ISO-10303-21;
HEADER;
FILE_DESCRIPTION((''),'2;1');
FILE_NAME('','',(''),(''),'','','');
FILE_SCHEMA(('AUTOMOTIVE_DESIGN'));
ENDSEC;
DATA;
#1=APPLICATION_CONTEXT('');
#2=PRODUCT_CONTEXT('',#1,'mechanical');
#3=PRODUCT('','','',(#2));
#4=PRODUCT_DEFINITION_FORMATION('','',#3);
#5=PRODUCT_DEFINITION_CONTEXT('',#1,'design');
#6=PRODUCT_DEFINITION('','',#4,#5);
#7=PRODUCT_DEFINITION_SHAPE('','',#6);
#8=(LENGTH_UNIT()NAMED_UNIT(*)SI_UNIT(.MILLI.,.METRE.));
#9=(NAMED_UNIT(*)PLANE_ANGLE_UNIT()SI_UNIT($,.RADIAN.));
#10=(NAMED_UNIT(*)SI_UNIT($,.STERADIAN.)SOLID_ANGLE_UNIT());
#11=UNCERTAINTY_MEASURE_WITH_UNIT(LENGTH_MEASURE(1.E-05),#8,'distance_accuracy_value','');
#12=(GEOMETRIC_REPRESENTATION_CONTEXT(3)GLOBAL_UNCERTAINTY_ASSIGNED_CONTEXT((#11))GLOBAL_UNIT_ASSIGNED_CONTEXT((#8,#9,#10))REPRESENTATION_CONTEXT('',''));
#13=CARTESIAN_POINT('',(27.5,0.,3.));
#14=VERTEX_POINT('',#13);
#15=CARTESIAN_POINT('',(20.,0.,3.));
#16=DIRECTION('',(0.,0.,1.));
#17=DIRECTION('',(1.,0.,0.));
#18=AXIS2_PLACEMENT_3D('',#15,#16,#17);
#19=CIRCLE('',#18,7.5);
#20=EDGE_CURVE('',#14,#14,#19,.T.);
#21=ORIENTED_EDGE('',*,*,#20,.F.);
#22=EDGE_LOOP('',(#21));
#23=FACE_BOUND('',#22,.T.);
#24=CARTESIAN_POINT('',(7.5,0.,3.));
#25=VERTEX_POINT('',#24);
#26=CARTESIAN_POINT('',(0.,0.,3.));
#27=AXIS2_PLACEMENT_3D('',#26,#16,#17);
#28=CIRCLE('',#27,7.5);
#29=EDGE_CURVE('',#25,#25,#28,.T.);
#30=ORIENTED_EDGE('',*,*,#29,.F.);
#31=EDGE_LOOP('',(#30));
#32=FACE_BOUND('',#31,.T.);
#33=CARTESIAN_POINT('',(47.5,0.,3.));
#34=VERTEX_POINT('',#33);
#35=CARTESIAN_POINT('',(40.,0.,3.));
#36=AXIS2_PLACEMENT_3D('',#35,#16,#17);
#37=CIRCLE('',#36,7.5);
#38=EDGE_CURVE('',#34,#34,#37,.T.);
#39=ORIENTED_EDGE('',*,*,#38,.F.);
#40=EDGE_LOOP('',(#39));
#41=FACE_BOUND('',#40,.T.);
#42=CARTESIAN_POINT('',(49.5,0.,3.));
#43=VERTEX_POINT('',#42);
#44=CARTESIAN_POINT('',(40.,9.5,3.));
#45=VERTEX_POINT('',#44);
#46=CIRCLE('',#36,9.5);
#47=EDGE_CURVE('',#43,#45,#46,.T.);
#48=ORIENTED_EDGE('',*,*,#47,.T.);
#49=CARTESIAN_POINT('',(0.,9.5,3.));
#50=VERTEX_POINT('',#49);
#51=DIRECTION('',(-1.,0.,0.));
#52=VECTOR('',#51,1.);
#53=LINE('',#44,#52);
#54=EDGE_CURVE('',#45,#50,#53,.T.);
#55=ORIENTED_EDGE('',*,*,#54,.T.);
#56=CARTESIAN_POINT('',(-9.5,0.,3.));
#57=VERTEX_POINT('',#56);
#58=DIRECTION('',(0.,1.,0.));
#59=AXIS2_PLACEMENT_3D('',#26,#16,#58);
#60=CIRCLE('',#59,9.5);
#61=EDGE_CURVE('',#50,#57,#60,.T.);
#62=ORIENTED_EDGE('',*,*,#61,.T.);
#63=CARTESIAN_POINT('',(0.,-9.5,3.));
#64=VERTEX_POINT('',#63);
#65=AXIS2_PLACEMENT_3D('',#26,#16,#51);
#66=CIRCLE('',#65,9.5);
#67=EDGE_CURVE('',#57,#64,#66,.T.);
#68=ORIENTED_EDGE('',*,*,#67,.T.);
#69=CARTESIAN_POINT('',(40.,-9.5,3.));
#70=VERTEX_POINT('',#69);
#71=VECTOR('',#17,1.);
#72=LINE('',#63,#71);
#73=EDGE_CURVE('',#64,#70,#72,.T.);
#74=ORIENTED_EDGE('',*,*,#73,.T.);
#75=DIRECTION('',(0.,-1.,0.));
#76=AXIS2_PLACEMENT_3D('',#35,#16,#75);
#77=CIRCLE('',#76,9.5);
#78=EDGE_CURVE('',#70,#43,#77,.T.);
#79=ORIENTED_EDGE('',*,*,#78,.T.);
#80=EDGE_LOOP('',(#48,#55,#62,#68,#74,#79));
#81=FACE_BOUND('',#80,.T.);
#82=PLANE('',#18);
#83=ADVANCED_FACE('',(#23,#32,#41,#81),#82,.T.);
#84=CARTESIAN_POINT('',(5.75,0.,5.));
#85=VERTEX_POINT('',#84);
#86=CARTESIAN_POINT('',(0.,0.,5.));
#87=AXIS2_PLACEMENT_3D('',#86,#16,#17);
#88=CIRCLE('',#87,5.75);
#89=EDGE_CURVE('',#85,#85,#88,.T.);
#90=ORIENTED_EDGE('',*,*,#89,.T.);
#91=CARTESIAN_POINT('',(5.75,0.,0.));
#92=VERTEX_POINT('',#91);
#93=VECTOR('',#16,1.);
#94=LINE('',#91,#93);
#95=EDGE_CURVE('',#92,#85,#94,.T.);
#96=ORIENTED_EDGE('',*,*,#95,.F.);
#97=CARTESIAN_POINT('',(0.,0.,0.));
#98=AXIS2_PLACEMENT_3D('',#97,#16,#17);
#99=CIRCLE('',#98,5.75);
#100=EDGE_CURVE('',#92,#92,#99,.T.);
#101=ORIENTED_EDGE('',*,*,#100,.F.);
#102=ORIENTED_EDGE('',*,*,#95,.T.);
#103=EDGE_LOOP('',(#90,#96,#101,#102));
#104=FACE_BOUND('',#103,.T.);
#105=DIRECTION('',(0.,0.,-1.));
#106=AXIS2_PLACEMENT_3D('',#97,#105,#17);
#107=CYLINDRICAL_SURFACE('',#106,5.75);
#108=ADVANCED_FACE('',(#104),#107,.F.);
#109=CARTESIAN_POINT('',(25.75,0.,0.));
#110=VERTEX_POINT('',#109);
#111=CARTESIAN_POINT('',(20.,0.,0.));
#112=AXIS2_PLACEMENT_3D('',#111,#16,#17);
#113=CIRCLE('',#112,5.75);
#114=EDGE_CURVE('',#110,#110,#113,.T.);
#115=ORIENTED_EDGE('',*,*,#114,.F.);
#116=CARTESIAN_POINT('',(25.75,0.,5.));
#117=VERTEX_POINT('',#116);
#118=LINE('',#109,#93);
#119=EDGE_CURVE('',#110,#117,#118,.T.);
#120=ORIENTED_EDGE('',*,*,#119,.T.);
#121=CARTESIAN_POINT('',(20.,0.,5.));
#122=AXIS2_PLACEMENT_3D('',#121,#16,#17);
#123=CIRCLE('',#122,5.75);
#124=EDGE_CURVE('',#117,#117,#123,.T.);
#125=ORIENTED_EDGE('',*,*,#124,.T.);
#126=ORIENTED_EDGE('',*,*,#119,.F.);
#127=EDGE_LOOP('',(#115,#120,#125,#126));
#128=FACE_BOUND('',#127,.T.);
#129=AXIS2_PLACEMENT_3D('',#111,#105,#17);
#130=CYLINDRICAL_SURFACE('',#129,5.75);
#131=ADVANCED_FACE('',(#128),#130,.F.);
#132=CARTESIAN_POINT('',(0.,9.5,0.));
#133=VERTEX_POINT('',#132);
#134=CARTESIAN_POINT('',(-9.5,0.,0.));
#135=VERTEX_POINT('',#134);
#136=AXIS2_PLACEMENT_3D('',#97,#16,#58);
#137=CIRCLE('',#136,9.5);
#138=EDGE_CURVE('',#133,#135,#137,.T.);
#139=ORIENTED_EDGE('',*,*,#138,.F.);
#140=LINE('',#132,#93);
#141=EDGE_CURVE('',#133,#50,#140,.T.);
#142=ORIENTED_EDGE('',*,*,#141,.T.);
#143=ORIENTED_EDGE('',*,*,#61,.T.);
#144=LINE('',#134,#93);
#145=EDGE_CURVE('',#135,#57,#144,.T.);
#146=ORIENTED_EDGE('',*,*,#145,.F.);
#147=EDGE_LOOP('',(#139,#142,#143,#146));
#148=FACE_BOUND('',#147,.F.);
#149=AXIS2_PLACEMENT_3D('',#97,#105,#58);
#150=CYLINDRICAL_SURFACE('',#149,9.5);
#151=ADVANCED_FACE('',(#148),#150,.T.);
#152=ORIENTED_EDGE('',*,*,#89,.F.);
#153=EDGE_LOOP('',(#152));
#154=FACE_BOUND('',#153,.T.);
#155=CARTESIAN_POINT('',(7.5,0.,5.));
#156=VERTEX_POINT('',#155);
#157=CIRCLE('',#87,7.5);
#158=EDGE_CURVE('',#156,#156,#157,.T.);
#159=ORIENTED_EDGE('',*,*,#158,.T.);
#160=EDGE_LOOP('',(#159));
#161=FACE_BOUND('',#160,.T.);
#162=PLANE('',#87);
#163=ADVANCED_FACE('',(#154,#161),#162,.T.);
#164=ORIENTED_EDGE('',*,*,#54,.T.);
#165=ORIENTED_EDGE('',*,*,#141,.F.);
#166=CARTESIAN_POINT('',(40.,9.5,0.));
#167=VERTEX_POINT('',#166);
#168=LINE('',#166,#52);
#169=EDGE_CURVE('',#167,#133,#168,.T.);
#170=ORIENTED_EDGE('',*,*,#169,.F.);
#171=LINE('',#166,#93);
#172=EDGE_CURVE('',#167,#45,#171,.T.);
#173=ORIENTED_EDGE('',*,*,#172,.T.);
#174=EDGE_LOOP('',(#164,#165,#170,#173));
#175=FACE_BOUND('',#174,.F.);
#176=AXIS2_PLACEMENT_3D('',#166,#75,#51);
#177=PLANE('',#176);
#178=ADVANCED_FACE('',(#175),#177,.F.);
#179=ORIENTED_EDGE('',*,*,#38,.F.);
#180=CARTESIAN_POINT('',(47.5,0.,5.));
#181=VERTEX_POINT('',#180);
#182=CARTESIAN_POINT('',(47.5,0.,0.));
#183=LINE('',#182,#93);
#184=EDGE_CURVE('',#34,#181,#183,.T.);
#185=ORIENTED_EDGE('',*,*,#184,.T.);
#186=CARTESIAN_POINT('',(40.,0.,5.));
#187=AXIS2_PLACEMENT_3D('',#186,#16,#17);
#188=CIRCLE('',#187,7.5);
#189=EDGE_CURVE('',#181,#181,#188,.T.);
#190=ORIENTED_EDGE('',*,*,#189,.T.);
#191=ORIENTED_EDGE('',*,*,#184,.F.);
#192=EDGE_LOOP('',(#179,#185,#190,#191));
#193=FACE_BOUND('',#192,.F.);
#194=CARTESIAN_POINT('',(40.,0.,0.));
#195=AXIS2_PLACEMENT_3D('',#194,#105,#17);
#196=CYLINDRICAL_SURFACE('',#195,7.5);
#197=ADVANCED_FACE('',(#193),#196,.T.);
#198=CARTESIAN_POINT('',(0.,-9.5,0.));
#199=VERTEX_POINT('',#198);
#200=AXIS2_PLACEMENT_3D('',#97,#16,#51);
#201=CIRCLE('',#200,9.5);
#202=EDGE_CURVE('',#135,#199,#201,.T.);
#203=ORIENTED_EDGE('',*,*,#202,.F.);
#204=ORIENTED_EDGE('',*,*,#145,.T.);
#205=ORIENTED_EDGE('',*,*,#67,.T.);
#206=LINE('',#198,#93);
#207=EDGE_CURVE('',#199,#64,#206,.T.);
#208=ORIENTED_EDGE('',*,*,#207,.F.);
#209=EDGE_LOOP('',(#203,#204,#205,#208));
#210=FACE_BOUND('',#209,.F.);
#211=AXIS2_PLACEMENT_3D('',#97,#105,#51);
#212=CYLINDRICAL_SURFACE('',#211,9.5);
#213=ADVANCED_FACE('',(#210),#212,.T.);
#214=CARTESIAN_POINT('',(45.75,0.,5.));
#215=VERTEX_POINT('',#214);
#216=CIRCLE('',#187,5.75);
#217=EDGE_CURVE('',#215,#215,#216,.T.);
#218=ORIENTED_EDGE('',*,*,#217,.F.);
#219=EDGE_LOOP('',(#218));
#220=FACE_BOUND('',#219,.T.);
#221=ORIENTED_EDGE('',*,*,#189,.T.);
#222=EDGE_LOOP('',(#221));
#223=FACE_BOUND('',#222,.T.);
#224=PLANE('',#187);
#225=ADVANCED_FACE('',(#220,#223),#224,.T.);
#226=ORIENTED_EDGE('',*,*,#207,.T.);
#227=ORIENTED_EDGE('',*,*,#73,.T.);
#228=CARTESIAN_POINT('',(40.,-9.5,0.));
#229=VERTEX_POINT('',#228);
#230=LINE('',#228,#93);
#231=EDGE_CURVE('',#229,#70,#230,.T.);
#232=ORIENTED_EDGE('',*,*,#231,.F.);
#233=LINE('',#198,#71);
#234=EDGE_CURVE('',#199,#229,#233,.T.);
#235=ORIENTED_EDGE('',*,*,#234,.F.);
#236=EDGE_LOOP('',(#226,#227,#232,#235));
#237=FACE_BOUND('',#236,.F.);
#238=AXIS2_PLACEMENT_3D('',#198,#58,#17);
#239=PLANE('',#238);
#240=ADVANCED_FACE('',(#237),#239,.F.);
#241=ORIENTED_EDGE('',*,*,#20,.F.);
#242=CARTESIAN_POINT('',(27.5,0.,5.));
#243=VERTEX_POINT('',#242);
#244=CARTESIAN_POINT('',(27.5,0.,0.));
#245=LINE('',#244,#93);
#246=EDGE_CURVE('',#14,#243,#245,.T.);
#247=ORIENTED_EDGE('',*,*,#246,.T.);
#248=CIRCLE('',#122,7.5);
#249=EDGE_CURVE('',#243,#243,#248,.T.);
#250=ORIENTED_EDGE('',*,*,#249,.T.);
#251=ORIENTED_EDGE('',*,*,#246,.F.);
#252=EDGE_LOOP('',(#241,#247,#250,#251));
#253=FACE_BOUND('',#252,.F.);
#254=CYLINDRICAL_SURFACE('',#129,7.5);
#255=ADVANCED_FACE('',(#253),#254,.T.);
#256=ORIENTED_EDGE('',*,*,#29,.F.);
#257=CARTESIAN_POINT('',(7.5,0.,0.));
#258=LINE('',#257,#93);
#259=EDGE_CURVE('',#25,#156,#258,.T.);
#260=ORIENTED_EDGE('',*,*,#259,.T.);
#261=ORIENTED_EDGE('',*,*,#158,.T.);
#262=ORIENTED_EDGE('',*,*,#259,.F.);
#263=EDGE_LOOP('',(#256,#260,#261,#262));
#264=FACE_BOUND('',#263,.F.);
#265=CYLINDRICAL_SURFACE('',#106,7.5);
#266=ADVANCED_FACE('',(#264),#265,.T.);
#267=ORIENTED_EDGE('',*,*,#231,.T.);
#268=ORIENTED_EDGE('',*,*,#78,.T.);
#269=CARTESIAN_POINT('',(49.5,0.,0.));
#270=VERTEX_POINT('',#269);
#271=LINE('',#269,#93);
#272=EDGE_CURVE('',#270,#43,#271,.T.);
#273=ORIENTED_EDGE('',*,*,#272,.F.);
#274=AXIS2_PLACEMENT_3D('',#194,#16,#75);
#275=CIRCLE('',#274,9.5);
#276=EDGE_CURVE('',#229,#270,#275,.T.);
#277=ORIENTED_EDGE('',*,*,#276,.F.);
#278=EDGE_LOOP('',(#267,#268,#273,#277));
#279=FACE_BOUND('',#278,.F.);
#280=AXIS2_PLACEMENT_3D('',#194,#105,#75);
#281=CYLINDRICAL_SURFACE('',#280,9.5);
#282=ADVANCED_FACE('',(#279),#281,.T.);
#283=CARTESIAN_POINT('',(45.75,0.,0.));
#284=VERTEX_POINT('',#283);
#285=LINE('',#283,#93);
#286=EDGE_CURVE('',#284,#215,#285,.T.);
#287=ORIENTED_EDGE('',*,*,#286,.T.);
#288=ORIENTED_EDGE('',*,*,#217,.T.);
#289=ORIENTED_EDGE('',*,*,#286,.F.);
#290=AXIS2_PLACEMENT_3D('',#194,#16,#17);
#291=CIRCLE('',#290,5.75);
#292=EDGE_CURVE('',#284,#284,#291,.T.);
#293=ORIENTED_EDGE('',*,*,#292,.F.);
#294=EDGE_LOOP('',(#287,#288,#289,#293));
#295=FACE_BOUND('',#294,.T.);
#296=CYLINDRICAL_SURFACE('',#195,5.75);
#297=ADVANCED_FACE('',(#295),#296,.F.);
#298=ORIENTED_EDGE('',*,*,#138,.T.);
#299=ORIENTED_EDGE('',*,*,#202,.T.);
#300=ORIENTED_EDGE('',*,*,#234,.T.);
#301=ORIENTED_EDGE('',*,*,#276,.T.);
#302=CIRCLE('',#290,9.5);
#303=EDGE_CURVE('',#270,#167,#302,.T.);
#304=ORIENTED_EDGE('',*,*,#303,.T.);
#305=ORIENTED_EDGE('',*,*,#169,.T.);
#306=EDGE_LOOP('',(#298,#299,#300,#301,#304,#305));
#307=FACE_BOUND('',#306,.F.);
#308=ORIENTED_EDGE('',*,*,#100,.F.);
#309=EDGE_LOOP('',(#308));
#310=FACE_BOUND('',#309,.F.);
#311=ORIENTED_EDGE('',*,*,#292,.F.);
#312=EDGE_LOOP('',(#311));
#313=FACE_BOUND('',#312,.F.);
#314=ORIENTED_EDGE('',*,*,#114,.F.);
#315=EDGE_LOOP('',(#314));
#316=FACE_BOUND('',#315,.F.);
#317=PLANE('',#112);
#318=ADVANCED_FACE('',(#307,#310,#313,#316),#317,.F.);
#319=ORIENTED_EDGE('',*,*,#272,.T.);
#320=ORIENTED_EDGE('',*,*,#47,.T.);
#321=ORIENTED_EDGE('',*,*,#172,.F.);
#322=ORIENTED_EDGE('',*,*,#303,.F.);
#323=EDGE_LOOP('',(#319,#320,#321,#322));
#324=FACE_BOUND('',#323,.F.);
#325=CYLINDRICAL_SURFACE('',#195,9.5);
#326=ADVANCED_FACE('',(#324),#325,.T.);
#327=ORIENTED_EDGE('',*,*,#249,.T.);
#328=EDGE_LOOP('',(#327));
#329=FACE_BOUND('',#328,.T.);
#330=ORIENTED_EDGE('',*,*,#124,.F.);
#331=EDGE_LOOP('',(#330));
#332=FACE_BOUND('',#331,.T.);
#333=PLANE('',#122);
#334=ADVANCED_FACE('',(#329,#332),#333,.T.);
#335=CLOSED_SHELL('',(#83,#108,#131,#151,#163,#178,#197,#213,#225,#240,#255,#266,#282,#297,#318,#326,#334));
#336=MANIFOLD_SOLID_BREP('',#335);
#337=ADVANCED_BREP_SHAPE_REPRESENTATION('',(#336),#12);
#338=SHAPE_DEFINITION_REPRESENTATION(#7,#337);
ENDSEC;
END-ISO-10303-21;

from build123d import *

# Parameters (mm, degrees)
F0_R     = 7.5
F1_DEPTH = 3
F0_R_2   = 5.75
F2_DEPTH = 5


# Not quite as in the source:
# - a feature names something its author has since deleted; it is built from what else it names


with BuildPart() as f1:
    # F0 (on Top) → F1 (new body)
    with BuildSketch(Plane.XY):
        with BuildLine():
            Line((40, 9.5), (0, 9.5))
            ThreePointArc((0, 9.5), (-6.7175144213, 6.7175144213), (-9.5, 0))
            ThreePointArc((-9.5, 0), (-6.7175144213, -6.7175144213), (0, -9.5))
            Line((0, -9.5), (40, -9.5))
            ThreePointArc((40, -9.5), (46.7175144213, -6.7175144213), (49.5, 0))
            ThreePointArc((49.5, 0), (46.7175144213, 6.7175144213), (40, 9.5))
        make_face()
        Circle(F0_R, mode=Mode.SUBTRACT)
        with Locations((20, 0)):
            Circle(F0_R, mode=Mode.SUBTRACT)
        with Locations((40, 0)):
            Circle(F0_R, mode=Mode.SUBTRACT)
    extrude(amount=F1_DEPTH)

    # F0 (on Top) → F2 (join)
    with BuildSketch(Plane.XY):
        Circle(F0_R)
        Circle(F0_R_2, mode=Mode.SUBTRACT)
        with Locations((20, 0)):
            Circle(F0_R)
        with Locations((20, 0)):
            Circle(F0_R_2, mode=Mode.SUBTRACT)
        with Locations((40, 0)):
            Circle(F0_R)
        with Locations((40, 0)):
            Circle(F0_R_2, mode=Mode.SUBTRACT)
    extrude(amount=F2_DEPTH)


solid = f1.part
